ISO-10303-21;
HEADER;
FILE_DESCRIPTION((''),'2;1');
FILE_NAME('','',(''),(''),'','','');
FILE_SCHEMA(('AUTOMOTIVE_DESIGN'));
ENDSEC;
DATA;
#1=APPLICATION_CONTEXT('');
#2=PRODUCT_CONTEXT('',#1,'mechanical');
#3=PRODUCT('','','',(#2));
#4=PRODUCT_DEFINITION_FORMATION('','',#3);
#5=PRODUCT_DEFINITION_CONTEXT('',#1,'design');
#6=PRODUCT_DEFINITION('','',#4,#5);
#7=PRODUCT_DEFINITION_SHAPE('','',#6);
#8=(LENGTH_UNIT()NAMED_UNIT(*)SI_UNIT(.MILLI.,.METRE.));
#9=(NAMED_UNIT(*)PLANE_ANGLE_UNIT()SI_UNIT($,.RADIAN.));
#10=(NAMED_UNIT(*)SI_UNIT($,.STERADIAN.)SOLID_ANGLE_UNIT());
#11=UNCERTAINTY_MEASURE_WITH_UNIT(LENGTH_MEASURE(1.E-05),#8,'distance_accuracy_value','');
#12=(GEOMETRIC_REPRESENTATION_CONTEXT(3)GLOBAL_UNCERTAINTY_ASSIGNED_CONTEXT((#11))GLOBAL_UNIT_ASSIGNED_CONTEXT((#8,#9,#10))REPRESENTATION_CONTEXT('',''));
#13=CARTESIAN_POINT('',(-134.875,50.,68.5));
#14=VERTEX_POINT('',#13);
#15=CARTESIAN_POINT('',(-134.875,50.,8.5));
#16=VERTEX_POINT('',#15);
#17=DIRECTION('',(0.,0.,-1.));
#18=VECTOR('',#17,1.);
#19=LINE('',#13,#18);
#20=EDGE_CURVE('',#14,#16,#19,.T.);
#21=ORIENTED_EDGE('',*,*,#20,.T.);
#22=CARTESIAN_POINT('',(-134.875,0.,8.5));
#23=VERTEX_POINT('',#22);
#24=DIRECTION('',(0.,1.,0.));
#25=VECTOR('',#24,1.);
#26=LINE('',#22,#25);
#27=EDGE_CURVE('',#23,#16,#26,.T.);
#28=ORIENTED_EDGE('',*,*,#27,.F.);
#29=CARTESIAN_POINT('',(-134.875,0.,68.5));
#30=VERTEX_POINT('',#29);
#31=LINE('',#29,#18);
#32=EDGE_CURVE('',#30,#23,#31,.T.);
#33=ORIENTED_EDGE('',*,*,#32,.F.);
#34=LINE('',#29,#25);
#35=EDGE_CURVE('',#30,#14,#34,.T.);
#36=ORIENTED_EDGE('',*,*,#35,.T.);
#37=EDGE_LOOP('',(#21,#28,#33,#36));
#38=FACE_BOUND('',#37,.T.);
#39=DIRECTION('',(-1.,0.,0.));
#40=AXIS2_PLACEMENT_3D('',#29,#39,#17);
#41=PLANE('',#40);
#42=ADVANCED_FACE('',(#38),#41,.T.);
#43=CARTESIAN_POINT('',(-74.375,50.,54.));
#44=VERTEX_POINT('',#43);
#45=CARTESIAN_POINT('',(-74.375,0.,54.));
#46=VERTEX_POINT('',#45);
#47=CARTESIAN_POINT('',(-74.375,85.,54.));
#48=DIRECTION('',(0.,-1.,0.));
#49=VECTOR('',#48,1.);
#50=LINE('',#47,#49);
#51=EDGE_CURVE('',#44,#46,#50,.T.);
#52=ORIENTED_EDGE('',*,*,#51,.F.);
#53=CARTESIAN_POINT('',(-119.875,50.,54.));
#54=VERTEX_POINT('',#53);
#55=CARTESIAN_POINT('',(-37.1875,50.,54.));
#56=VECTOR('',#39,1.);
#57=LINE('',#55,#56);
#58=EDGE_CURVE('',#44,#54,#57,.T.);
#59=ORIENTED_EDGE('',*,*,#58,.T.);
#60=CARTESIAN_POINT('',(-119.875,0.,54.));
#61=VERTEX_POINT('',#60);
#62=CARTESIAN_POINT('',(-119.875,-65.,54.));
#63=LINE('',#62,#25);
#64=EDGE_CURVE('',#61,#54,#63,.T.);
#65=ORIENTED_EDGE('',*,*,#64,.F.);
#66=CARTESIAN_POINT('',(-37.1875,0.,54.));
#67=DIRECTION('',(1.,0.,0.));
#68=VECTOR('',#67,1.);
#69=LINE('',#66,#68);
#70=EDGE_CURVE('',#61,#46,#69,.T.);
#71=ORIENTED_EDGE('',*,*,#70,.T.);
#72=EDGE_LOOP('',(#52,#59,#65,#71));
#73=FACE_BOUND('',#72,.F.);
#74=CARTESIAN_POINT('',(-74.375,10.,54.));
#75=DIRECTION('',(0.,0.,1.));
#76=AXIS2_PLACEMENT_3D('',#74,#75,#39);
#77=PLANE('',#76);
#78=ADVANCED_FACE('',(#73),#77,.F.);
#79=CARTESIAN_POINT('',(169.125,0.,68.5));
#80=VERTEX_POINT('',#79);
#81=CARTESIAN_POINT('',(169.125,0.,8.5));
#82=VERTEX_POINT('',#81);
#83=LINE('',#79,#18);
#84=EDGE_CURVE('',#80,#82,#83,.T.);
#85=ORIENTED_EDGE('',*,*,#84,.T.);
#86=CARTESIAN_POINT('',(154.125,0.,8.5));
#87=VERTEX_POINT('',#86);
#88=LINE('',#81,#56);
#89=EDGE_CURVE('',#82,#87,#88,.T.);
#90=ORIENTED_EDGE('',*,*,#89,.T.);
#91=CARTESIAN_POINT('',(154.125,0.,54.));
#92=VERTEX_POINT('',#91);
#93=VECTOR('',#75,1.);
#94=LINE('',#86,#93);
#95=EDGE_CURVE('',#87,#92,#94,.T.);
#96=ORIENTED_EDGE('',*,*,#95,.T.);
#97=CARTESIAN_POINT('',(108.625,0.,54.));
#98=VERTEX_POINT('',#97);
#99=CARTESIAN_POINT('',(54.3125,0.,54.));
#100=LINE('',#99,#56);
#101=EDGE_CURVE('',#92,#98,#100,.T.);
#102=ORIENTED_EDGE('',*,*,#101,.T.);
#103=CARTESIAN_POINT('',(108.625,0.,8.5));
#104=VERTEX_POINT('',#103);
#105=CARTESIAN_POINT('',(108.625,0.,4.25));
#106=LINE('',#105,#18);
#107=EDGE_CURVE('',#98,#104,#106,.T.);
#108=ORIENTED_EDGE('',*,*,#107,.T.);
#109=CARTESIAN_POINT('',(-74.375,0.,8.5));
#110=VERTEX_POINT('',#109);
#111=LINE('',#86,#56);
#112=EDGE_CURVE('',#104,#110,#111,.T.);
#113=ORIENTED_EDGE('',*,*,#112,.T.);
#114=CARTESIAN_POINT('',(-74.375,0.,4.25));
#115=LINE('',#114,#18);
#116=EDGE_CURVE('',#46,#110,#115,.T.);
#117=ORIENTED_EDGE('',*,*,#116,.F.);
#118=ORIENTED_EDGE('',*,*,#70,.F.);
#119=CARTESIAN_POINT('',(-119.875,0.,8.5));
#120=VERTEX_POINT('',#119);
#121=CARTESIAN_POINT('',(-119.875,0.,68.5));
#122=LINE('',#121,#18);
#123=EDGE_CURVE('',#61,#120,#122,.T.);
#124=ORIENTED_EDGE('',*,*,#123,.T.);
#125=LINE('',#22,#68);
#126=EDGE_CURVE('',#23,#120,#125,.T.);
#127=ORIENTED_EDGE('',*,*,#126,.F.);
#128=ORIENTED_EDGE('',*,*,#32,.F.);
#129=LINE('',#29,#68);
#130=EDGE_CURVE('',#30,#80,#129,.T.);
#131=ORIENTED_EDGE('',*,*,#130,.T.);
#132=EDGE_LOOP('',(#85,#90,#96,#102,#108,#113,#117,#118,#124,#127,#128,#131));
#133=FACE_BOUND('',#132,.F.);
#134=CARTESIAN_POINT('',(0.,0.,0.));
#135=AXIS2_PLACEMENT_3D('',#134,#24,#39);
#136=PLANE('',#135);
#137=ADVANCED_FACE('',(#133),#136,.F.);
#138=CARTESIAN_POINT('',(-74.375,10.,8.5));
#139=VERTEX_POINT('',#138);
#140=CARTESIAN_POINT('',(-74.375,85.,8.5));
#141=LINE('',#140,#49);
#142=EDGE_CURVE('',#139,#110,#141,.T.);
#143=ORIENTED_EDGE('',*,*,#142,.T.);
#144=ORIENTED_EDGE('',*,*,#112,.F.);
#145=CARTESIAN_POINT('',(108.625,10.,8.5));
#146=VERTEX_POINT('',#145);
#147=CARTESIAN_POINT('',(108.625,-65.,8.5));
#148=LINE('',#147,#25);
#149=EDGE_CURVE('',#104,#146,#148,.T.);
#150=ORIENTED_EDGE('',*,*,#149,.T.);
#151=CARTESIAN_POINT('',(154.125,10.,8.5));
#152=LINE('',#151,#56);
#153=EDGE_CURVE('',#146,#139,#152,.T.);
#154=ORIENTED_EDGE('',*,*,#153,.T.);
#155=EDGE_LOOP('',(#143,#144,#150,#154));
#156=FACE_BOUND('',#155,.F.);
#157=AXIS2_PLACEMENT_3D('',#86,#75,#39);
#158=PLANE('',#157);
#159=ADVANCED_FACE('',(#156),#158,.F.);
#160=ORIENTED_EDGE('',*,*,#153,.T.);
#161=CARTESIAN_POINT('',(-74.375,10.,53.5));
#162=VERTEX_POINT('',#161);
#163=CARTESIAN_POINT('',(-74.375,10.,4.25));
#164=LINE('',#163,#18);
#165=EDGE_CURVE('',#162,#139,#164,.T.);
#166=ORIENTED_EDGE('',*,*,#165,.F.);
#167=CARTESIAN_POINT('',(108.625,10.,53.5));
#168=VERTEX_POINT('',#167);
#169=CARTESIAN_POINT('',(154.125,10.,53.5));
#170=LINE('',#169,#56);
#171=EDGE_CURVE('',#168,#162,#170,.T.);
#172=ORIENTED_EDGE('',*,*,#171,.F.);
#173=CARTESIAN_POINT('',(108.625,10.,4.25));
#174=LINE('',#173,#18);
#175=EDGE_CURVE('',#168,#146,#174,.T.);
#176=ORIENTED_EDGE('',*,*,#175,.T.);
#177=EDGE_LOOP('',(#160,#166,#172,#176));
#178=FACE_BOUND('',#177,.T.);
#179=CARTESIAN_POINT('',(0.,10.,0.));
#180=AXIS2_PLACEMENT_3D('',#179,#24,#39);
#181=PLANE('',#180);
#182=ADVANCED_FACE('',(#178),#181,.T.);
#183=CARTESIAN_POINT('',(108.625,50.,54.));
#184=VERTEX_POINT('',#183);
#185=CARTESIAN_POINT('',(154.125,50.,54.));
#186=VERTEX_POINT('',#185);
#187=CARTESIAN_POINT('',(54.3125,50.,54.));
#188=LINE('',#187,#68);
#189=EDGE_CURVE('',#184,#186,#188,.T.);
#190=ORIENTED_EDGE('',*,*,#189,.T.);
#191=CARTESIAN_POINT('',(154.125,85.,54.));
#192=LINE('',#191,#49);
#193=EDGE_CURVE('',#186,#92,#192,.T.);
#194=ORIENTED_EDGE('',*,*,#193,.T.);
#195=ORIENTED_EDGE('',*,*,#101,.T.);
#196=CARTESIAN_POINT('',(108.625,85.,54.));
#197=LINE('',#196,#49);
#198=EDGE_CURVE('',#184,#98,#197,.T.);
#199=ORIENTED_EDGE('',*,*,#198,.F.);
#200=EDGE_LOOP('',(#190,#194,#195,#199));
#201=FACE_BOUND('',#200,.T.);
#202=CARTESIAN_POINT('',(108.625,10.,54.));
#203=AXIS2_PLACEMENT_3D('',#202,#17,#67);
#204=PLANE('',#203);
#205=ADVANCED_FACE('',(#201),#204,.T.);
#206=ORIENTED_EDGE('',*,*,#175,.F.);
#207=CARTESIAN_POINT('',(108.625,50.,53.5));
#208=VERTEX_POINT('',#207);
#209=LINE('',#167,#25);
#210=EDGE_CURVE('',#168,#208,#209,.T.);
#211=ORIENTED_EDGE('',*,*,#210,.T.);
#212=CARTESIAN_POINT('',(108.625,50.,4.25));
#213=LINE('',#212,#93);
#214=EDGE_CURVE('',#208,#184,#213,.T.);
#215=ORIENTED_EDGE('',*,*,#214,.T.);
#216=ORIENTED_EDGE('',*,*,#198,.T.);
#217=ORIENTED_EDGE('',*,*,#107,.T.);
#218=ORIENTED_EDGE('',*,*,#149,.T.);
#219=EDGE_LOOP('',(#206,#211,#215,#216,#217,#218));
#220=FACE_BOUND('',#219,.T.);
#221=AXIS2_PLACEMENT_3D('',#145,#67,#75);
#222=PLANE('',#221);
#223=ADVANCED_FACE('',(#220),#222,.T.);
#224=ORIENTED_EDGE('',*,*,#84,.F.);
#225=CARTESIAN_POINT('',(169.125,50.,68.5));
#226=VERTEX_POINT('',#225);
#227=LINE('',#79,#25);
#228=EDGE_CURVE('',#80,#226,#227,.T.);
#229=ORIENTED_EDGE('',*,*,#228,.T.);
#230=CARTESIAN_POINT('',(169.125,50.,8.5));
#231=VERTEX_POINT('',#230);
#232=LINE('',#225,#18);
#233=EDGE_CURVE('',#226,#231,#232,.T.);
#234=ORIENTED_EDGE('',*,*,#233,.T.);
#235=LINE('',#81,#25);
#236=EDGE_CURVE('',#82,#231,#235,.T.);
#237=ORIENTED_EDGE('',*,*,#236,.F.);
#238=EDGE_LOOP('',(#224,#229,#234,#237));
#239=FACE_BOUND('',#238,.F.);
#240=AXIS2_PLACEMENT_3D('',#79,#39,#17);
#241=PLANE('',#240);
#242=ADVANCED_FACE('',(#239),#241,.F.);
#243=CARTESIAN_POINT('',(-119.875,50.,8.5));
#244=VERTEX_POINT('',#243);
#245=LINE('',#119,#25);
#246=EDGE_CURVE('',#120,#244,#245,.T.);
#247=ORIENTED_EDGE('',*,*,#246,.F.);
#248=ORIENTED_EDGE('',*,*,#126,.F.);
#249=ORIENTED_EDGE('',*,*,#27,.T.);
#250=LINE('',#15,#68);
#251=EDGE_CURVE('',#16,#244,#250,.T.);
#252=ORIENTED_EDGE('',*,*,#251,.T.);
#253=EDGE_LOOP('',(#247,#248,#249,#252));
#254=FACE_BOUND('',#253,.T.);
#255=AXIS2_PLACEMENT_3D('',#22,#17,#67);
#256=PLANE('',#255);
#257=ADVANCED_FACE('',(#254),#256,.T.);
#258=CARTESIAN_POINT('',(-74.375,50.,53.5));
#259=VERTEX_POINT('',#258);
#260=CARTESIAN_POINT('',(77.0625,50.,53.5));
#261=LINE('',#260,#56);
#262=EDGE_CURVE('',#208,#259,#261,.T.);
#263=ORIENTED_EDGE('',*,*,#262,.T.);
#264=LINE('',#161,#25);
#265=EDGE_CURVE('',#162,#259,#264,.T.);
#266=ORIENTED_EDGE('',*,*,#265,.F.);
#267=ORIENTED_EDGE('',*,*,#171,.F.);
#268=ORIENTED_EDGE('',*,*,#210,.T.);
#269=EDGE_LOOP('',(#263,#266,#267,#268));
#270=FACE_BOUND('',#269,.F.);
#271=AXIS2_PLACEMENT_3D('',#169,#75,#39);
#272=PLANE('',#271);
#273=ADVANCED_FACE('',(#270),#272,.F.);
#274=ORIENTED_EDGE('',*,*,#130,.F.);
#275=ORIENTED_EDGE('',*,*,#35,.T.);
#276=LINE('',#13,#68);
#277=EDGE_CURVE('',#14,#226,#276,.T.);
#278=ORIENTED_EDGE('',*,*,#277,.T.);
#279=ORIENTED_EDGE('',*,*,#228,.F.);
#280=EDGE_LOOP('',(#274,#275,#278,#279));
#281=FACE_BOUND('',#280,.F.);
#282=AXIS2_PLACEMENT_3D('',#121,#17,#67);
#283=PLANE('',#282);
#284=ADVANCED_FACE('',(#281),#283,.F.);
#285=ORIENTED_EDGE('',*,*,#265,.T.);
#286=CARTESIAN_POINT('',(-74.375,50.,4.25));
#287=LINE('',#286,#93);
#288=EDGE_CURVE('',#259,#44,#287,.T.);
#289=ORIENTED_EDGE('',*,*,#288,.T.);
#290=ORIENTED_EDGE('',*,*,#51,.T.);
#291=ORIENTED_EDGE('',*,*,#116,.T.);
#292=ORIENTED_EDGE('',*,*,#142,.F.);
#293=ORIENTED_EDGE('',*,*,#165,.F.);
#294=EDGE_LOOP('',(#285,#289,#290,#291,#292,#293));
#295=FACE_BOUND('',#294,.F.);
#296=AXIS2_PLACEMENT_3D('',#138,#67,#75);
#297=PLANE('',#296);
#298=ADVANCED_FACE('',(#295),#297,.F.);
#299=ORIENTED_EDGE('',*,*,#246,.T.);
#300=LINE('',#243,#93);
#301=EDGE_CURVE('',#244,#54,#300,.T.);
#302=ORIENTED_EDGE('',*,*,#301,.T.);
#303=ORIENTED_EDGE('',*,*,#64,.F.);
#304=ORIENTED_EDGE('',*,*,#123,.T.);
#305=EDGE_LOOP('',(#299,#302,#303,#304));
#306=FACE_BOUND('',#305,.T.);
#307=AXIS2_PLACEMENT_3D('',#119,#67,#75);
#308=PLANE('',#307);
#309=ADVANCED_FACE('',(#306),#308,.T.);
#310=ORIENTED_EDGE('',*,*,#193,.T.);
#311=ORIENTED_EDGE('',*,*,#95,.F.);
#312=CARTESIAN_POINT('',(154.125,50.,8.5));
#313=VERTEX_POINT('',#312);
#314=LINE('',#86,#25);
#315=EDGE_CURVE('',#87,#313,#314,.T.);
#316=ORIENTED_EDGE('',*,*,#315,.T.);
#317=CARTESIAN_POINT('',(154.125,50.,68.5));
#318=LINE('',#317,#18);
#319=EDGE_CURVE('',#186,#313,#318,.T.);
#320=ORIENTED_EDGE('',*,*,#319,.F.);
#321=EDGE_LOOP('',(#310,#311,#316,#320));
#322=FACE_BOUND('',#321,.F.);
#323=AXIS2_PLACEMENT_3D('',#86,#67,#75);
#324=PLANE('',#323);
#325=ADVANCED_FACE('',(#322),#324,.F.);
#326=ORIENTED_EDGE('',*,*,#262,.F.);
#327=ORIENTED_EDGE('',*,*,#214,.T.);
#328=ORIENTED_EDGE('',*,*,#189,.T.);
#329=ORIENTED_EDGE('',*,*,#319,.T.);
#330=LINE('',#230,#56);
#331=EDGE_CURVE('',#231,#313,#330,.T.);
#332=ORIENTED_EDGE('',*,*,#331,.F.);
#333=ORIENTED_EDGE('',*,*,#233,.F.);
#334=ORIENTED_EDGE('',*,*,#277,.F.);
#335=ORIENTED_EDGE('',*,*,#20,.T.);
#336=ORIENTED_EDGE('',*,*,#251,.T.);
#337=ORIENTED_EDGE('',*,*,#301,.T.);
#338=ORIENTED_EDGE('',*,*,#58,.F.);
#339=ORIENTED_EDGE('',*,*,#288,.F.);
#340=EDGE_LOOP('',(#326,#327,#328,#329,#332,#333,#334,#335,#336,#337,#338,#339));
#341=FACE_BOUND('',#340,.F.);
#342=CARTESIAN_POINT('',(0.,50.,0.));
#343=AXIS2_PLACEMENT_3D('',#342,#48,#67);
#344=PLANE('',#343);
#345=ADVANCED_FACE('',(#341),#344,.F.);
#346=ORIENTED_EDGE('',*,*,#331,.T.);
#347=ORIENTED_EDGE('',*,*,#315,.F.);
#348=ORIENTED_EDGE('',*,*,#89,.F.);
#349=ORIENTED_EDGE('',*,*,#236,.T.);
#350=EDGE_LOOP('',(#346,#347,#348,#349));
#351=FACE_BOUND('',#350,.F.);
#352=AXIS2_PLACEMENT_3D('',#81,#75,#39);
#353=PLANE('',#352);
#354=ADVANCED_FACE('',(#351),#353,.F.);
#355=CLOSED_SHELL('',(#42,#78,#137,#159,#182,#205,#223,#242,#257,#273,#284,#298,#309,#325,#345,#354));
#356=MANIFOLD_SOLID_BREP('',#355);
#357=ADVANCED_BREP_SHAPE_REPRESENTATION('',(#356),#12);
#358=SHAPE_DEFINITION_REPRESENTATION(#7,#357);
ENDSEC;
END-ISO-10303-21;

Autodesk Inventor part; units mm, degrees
ref_plane "YZ Plane" through (0, 0, 0) normal (1, 0, 0) x (0, 1, 0)
ref_plane "XZ Plane" through (0, 0, 0) normal (0, 1, 0) x (-1, 0, 0)
ref_plane "XY Plane" through (0, 0, 0) normal (0, 0, 1) x (1, 0, 0)
sketch "Sketch1" plane through (0, 0, 0) normal (0, 1, 0) x (-1, 0, 0)
  line L0 (119.875, 68.5) -> (-154.125, 68.5)
  line L1 (-154.125, 68.5) -> (-154.125, 8.5)
  line L2 (-154.125, 8.5) -> (119.875, 8.5)
  line L3 (119.875, 8.5) -> (119.875, 68.5)
  point P0 (0, 0)
  dimension "d0" = 274
  dimension "d1" = 60
extrude "Extrusion1" add sketch "Sketch1" along normal blind 10
sketch "Sketch2" plane through (0, 10, 0) normal (0, 1, 0) x (1, 0, 0)
  line L0 (-119.875, -8.5) -> (-119.875, -68.5) projected
  line L1 (-119.875, -68.5) -> (154.125, -68.5)
  line L2 (154.125, -68.5) -> (154.125, -53.5)
  line L3 (154.125, -53.5) -> (-119.875, -53.5)
  line L4 (-119.875, -53.5) -> (-119.875, -68.5)
  line L5 (154.125, -68.5) -> (154.125, -8.5) projected
  line L6 (154.125, -8.5) -> (-119.875, -8.5) projected
  line L7 (-119.875, -8.5) -> (-119.875, -68.5) projected
  line L8 (-119.875, -68.5) -> (154.125, -68.5) projected
  point P0 (0, 0)
  dimension "d4" = 15
extrude "Extrusion2" add sketch "Sketch2" along normal blind 50 contours L3 L2 L1 L0
sketch "Sketch3" plane through (0, 10, 0) normal (0, 1, 0) x (1, 0, 0)
  line L0 (154.125, -8.5) -> (108.625, -8.5)
  line L1 (108.625, -8.5) -> (108.625, -54)
  line L2 (108.625, -54) -> (154.125, -54)
  line L3 (154.125, -54) -> (154.125, -8.5)
  line L4 (-119.875, -8.5) -> (-119.875, -68.5) projected
  line L5 (-119.875, -8.5) -> (-74.375, -8.5)
  line L6 (-74.375, -8.5) -> (-74.375, -54)
  line L7 (-74.375, -54) -> (-119.875, -54)
  line L8 (-119.875, -54) -> (-119.875, -8.5)
  point P0 (0, 0)
  dimension "d7" = 45.5
  dimension "d8" = 45.5
extrude "Extrusion3" cut sketch "Sketch3" along normal mid plane 150
sketch "Sketch4" plane through (0, 0, 0) normal (0, -1, 0) x (1, 0, 0)
  line L0 (-74.375, 54) -> (-74.375, 8.5) projected
  line L1 (108.625, 8.5) -> (-74.375, 8.5) projected
  line L2 (108.625, 8.5) -> (108.625, 54) projected
  line L3 (108.625, 54) -> (154.125, 54) projected
  line L4 (154.125, 68.5) -> (154.125, 54) projected
  line L5 (-119.875, 68.5) -> (154.125, 68.5) projected
  line L6 (-119.875, 54) -> (-119.875, 68.5) projected
  line L7 (-119.875, 54) -> (-74.375, 54) projected
  line L8 (-119.875, 68.5) -> (-134.875, 68.5)
  line L9 (-134.875, 68.5) -> (-134.875, 8.5)
  line L10 (-134.875, 8.5) -> (-119.875, 8.5)
  line L11 (-119.875, 8.5) -> (-119.875, 68.5)
  line L12 (154.125, 68.5) -> (169.125, 68.5)
  line L13 (169.125, 68.5) -> (169.125, 8.5)
  line L14 (169.125, 8.5) -> (154.125, 8.5)
  line L15 (154.125, 8.5) -> (154.125, 68.5)
  point P0 (0, 0)
  dimension "d11" = 60
  dimension "d12" = 60
  dimension "d13" = 15
  dimension "d14" = 15
extrude "Extrusion4" add sketch "Sketch4" against normal blind 50 contours L11 L10 L9 L8 L6 | L12 L13 L14 L15 L4
sketch "Sketch5" plane through (0, 60, 0) normal (0, 1, 0) x (1, 0, 0)
  line L0 (-140, -80) -> (185, -80)
  line L1 (185, -80) -> (185, 19)
  line L2 (185, 19) -> (-140, 19)
  line L3 (-140, 19) -> (-140, -80)
  point P0 (0, 0)
extrude "Extrusion5" cut sketch "Sketch5" against normal up to surface (10 mm away)
properties part number "VerticalAxis"
